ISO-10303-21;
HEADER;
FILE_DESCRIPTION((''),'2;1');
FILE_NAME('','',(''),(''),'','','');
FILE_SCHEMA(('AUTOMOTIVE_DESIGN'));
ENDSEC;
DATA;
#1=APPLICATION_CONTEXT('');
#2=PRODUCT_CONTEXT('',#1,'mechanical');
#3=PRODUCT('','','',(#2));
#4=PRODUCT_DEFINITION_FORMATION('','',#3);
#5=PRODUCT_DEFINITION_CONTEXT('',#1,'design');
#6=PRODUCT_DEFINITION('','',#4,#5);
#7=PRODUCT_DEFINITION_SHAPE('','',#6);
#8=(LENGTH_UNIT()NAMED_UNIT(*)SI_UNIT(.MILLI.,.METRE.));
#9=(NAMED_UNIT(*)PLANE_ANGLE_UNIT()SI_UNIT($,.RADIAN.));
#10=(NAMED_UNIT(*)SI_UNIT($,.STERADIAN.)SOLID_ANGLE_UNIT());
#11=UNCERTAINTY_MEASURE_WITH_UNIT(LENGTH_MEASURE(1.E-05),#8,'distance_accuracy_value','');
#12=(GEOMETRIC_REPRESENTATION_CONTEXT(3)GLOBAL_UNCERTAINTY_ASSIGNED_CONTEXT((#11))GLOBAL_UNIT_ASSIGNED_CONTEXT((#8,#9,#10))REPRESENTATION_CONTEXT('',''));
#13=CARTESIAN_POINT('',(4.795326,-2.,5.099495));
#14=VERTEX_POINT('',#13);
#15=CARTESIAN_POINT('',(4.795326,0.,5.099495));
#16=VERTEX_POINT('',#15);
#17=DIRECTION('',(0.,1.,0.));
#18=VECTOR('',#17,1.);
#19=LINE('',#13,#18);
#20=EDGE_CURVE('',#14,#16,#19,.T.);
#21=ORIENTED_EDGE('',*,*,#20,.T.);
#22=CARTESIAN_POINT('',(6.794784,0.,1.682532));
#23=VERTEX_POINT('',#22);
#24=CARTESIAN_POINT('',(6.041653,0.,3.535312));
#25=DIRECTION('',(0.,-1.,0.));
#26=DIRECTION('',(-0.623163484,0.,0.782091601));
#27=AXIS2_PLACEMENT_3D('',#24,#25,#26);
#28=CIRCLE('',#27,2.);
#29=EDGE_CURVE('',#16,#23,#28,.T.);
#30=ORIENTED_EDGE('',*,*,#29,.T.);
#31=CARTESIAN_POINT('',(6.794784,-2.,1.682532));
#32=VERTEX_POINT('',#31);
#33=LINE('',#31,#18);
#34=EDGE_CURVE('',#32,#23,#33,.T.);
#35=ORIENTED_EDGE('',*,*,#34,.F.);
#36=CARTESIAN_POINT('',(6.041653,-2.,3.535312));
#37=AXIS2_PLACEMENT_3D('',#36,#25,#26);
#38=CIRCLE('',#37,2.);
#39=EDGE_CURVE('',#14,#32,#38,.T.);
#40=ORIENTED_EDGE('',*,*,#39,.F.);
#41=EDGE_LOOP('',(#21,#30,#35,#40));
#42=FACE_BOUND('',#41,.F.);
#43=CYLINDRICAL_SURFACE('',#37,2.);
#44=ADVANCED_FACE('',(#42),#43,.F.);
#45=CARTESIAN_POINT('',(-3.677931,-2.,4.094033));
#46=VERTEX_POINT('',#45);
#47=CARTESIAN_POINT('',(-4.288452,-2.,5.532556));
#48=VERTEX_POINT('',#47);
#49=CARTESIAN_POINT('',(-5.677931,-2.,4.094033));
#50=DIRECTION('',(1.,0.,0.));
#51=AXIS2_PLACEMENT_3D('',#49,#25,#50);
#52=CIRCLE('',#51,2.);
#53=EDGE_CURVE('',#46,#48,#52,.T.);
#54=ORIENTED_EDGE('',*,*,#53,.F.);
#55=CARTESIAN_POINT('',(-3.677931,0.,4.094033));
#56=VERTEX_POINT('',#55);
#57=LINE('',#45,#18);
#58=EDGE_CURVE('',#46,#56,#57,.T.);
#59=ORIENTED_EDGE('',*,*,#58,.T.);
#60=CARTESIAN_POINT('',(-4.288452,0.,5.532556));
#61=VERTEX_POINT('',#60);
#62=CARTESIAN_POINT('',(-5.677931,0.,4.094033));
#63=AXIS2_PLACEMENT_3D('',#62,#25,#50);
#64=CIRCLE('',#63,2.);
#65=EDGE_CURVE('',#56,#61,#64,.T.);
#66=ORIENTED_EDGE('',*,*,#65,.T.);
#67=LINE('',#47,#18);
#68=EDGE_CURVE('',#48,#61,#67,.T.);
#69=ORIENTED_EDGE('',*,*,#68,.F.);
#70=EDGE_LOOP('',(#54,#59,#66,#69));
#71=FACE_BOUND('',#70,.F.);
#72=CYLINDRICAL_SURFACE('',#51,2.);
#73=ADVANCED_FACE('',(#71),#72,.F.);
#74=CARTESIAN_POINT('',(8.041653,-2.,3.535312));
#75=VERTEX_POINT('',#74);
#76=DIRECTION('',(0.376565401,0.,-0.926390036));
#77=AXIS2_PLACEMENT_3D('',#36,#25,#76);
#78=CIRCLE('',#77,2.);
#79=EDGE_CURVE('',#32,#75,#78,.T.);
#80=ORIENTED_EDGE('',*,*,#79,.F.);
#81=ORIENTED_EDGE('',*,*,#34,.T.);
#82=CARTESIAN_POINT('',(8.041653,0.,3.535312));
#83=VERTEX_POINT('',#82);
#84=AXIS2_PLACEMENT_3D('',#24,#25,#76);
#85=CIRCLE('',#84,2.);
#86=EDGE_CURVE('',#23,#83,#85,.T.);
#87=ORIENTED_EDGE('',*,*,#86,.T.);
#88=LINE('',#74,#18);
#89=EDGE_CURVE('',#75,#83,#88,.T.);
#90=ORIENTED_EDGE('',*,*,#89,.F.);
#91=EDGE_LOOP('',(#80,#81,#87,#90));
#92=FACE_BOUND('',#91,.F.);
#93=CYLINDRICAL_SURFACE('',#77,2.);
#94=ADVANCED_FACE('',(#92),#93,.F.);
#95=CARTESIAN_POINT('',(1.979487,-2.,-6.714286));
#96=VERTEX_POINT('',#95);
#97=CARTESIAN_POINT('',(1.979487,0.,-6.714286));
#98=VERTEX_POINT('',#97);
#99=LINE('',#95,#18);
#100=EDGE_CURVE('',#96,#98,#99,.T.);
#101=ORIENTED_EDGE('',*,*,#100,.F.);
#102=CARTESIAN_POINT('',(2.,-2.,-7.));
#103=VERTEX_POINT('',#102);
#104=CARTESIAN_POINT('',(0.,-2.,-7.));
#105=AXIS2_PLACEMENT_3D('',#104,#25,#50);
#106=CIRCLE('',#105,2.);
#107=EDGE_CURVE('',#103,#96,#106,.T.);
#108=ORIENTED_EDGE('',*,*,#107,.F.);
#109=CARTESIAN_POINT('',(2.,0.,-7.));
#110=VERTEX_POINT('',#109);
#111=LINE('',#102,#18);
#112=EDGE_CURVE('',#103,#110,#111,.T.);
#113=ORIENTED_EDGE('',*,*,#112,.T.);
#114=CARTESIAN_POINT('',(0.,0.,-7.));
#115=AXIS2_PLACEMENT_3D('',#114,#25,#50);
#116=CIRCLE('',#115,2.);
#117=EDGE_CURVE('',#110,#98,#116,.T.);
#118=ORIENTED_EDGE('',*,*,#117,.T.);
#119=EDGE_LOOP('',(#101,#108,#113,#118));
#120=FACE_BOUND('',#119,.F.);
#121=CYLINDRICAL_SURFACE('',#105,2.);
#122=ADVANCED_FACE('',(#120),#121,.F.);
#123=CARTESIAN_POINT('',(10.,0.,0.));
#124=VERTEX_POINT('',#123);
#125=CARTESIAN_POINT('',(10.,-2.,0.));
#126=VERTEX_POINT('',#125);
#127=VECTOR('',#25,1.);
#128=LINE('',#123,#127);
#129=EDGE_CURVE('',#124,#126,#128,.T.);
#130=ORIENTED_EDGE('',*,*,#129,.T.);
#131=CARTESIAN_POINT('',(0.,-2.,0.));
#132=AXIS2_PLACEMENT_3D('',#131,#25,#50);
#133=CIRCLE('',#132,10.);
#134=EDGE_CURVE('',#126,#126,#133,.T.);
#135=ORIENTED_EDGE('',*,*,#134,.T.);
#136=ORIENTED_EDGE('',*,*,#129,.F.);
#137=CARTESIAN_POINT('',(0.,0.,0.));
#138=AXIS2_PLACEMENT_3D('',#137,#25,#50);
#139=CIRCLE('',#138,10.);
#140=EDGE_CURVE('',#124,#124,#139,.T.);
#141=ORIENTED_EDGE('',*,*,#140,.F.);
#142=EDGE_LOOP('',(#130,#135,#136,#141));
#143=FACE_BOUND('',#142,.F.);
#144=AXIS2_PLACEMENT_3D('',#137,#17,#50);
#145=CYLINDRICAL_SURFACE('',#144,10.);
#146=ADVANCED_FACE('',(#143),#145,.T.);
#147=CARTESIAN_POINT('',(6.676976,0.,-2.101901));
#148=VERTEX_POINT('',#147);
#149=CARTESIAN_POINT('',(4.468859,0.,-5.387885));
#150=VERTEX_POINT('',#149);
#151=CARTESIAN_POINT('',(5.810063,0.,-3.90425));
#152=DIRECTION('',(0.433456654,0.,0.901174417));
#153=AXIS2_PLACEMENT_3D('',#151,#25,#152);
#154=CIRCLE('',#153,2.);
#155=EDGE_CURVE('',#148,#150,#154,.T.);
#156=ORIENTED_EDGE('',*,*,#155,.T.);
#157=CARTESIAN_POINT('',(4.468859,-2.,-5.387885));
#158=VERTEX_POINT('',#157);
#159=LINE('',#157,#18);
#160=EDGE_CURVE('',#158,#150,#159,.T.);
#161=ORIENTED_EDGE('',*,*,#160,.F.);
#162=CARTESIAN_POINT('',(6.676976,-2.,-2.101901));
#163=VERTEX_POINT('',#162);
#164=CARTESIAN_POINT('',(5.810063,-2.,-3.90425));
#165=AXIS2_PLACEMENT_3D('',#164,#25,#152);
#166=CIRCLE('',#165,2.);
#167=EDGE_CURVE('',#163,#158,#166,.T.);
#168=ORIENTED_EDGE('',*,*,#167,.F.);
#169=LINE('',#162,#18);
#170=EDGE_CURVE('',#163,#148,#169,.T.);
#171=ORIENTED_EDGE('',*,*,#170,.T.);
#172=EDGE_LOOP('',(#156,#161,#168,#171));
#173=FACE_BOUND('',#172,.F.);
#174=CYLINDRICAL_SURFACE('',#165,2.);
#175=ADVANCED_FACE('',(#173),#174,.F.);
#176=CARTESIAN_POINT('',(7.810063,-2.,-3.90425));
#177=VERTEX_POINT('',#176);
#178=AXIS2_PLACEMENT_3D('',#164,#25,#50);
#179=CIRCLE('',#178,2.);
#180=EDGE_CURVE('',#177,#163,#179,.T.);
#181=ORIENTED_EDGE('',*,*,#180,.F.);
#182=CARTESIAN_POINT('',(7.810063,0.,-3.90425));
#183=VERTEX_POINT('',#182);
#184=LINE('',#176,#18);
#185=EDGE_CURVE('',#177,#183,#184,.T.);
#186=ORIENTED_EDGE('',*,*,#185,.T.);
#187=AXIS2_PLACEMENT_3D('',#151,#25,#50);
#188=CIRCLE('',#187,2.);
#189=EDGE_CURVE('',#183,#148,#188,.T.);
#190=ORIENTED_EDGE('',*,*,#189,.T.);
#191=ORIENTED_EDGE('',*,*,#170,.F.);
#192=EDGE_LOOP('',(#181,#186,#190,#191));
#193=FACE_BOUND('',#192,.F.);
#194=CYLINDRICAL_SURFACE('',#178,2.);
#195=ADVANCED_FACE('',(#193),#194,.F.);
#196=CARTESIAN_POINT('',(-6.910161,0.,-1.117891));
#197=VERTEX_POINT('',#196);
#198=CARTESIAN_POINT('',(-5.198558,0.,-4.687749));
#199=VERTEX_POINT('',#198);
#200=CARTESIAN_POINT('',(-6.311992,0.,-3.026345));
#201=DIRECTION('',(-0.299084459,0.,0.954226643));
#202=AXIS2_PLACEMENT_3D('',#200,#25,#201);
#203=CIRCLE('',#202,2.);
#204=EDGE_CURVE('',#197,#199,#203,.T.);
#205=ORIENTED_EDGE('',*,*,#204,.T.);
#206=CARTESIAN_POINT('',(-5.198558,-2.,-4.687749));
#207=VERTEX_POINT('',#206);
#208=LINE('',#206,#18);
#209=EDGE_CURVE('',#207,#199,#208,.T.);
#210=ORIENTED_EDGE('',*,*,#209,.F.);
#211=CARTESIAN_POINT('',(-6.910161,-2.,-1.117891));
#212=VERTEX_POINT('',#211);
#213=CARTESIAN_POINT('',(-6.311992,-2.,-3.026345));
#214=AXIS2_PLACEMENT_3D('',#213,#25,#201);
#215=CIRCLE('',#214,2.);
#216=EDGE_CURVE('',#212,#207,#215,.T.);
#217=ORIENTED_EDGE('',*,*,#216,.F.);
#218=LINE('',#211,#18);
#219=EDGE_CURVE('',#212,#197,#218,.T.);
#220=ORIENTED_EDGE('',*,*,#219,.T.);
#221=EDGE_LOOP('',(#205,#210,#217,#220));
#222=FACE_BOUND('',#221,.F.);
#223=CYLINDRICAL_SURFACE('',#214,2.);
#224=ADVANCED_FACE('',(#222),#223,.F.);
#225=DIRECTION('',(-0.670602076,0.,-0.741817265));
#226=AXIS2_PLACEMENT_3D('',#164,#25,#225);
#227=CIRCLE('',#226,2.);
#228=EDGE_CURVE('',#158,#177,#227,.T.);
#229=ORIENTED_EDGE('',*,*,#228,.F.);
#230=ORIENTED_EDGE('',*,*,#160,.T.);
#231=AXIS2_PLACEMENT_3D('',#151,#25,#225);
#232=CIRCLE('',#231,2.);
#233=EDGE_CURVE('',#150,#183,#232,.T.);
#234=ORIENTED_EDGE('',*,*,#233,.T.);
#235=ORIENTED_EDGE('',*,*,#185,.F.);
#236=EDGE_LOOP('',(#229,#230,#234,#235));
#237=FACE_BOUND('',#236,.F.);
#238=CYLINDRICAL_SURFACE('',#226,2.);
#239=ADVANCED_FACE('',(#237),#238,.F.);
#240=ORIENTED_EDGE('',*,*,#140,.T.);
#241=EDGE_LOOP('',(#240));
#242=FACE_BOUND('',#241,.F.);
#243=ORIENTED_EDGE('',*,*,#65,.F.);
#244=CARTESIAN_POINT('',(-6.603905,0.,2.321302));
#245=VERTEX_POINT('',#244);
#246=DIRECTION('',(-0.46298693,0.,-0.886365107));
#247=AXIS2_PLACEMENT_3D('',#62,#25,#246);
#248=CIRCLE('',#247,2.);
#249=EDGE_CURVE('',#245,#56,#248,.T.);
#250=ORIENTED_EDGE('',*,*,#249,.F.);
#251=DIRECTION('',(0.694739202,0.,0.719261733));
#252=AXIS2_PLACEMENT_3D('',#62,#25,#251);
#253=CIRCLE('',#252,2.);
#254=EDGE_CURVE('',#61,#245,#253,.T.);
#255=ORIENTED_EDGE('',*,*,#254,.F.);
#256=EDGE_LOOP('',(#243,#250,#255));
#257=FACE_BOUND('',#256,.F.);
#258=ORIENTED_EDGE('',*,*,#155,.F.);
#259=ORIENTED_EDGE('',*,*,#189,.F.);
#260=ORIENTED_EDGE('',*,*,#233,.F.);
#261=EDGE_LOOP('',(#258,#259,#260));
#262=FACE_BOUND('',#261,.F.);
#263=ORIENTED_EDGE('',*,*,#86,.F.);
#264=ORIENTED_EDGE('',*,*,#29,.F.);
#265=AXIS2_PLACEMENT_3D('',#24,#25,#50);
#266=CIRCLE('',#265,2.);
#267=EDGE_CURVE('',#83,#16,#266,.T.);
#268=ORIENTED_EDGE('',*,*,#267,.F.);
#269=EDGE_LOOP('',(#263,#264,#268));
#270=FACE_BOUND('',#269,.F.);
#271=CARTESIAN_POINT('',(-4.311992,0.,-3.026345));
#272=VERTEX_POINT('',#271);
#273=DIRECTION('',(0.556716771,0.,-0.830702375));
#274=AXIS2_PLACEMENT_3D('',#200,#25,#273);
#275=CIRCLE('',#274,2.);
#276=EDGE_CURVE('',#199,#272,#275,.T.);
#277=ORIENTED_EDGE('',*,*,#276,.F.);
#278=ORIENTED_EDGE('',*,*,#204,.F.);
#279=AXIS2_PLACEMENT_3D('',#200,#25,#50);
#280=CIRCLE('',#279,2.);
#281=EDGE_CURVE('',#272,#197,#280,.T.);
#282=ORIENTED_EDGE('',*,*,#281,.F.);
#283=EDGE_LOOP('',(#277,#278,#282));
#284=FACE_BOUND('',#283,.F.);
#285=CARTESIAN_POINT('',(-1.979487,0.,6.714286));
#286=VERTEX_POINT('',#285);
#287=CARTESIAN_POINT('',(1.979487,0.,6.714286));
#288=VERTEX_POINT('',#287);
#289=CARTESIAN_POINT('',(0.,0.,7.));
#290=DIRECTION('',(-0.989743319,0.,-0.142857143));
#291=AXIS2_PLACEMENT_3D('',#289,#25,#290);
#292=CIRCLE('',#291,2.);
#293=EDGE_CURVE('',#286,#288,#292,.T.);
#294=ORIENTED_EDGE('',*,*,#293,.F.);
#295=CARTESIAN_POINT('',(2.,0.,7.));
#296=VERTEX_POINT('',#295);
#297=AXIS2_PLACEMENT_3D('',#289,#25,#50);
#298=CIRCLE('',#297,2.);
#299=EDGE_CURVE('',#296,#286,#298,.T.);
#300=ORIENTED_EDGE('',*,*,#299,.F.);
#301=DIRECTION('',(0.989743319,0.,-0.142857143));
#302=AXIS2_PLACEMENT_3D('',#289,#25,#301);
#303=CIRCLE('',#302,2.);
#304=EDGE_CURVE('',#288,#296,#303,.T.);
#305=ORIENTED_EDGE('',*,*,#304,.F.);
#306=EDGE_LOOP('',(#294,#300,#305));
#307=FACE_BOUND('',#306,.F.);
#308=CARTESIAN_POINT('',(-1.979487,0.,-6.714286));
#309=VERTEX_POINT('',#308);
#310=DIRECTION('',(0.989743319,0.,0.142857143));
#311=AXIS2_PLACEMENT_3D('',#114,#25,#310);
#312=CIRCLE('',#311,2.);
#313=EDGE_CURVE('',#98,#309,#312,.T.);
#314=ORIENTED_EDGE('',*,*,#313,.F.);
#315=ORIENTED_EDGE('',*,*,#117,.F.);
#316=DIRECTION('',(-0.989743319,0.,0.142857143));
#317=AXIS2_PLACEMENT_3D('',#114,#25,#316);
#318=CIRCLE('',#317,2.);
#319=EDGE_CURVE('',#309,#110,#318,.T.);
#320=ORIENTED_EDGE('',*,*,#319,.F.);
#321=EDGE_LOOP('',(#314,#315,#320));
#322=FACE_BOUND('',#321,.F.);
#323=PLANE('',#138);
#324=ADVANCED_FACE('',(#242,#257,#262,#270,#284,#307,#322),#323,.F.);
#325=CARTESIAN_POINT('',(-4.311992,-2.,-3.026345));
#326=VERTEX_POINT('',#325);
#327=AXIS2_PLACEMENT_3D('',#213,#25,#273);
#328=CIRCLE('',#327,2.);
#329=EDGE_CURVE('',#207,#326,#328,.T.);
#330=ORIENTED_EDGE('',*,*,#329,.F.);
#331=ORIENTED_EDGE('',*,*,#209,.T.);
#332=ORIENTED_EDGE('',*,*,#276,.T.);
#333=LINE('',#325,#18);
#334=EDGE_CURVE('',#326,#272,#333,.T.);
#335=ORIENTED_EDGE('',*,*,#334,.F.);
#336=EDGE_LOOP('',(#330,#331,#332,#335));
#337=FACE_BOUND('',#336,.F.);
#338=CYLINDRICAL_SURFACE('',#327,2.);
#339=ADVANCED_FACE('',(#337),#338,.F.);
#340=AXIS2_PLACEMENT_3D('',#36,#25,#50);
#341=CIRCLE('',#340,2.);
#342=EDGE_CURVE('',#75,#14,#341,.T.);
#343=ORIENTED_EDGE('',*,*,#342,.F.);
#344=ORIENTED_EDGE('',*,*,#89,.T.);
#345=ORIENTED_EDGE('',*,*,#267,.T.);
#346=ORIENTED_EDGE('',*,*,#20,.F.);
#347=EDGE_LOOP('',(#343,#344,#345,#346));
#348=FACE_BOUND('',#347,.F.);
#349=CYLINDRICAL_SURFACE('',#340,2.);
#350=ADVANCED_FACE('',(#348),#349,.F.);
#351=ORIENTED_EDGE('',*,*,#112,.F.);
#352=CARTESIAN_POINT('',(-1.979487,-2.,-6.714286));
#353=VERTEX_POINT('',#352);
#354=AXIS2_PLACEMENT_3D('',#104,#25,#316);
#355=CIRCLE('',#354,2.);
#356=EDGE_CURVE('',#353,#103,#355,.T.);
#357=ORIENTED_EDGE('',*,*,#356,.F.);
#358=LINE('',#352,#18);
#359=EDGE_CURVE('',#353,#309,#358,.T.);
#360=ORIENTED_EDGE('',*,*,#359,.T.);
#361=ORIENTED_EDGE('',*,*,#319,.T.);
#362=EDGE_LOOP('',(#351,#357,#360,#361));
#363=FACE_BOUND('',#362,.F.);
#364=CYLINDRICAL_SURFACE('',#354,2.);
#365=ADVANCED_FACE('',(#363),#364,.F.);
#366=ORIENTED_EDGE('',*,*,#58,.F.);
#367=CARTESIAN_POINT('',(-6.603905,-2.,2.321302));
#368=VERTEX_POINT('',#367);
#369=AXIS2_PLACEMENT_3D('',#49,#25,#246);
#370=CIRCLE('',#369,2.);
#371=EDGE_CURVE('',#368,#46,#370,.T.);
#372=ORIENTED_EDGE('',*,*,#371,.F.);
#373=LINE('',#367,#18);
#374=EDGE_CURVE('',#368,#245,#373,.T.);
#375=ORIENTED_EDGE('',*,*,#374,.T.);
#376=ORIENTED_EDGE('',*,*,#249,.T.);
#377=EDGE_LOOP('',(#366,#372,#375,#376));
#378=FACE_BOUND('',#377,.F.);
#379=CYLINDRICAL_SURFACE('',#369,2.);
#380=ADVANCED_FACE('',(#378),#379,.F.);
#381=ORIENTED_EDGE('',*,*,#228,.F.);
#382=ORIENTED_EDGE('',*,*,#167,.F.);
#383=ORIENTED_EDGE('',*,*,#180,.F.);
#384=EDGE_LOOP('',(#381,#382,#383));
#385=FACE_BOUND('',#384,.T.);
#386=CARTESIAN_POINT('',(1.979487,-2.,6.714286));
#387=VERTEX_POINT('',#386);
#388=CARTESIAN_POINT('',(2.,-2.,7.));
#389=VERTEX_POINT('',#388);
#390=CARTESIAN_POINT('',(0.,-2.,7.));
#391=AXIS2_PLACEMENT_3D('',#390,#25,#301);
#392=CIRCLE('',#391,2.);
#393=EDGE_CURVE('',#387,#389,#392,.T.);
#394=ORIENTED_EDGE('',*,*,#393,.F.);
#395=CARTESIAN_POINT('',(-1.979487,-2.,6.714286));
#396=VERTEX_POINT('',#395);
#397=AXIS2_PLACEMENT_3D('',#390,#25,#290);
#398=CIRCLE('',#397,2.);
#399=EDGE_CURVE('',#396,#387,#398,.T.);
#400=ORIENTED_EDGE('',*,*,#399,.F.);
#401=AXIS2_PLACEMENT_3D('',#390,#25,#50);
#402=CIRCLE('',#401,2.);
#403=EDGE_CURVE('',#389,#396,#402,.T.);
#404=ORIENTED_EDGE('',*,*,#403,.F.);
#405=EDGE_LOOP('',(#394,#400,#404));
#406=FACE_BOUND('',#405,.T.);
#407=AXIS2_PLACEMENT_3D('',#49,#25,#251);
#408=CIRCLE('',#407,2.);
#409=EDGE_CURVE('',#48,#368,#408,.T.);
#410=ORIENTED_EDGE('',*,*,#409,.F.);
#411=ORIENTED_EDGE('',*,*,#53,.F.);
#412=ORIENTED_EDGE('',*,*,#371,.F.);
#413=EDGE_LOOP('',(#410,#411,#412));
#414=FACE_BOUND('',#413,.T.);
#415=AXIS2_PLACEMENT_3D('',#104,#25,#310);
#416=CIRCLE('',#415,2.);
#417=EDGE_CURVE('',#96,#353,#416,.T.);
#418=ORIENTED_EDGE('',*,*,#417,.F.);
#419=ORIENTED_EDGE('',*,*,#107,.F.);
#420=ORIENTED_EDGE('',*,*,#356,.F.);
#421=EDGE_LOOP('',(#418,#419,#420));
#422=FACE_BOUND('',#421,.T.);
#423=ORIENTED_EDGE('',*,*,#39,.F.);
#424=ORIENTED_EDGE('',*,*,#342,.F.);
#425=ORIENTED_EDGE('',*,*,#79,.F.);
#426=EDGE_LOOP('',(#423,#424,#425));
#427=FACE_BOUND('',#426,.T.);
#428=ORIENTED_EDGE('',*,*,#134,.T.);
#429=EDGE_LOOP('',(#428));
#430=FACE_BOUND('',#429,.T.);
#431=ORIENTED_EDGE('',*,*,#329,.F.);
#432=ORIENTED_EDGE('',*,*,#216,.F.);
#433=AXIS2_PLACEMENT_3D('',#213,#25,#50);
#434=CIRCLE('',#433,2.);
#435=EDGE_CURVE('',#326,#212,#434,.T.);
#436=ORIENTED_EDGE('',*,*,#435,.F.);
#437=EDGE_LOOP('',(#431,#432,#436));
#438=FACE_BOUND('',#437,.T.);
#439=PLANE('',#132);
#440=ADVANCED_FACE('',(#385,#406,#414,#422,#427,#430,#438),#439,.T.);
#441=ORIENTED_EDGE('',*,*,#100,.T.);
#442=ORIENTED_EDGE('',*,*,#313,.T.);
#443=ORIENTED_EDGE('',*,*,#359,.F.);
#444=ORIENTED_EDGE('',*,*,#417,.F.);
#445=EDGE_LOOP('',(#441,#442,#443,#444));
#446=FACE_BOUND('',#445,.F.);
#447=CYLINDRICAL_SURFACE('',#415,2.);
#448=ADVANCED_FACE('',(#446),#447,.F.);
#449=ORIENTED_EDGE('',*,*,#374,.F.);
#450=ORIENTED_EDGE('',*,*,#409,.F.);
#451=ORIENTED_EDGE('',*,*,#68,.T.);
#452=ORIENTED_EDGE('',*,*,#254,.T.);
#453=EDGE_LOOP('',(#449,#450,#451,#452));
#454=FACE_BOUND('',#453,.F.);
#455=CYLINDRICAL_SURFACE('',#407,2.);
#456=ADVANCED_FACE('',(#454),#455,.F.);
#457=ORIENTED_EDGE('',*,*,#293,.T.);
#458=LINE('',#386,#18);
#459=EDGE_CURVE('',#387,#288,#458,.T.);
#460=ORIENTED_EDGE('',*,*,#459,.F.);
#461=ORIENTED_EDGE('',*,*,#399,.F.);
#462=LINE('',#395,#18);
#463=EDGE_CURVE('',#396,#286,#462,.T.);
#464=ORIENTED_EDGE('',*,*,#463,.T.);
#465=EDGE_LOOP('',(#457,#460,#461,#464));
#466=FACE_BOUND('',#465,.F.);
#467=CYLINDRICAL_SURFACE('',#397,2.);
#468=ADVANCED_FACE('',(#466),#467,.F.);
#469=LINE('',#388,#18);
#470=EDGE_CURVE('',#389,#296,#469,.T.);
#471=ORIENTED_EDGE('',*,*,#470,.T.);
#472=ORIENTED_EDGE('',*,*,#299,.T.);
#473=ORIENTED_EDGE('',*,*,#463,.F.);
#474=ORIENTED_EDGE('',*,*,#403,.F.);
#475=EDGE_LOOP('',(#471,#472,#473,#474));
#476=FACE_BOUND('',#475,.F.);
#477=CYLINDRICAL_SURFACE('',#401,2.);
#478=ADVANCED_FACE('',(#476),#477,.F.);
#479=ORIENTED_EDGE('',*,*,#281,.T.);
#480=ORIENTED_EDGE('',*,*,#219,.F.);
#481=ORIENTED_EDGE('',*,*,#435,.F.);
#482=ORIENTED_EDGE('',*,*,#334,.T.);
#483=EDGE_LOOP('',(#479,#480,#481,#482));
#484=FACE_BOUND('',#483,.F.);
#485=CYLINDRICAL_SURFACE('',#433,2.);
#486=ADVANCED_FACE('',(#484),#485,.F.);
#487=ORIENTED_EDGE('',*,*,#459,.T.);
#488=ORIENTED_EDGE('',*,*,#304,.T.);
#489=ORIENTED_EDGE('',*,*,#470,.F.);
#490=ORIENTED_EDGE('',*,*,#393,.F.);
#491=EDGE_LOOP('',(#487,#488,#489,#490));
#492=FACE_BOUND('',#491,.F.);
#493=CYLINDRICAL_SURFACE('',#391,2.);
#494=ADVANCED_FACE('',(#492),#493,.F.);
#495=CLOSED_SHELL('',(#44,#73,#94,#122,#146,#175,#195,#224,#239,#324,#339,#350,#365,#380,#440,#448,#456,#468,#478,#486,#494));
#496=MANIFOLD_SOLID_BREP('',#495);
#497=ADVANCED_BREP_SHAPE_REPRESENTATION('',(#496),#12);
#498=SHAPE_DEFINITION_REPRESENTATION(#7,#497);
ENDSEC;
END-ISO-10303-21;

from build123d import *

# Parameters (mm, degrees)
F0_R     = 10
F1_DEPTH = 2
F3_DEPTH = 2.001


with BuildPart() as f1:
    # F0 (on Front) → F1 (new body)
    with BuildSketch(Plane.XZ):
        Circle(F0_R)
    extrude(amount=F1_DEPTH)

    # F2 (on face) → F3 (cut, through all)
    with BuildSketch(Plane.XZ.offset(2)):
        with BuildLine():
            ThreePointArc((4.795326069, 5.0994948663), (4.3154664556, 2.525222618), (6.7947838404, 1.6825315934))
            ThreePointArc((6.7947838404, 1.6825315934), (6.0416530379, 3.5353116652), (4.795326069, 5.0994948663))
        make_face()
        with BuildLine():
            ThreePointArc((4.795326069, 5.0994948663), (6.0416530379, 3.5353116652), (6.7947838404, 1.6825315934))
            ThreePointArc((6.7947838404, 1.6825315934), (7.700909137, 2.4186786917), (8.0416530379, 3.5353116652))
            ThreePointArc((8.0416530379, 3.5353116652), (6.9097964771, 5.3370682994), (4.795326069, 5.0994948663))
        make_face()
        with BuildLine():
            ThreePointArc((7.8100628501, -3.9042502068), (7.5032590313, -2.8397847578), (6.6769761581, -2.1019013736))
            ThreePointArc((6.6769761581, -2.1019013736), (5.8100628501, -3.9042502068), (4.4688586973, -5.3878847374))
            ThreePointArc((4.4688586973, -5.3878847374), (6.6217252474, -5.7321463069), (7.8100628501, -3.9042502068))
        make_face()
        with BuildLine():
            ThreePointArc((4.4688586973, -5.3878847374), (5.8100628501, -3.9042502068), (6.6769761581, -2.1019013736))
            ThreePointArc((6.6769761581, -2.1019013736), (4.150044893, -2.7887501477), (4.4688586973, -5.3878847374))
        make_face()
        with BuildLine():
            ThreePointArc((-1.9794866372, 6.7142857143), (0, 5), (1.9794866372, 6.7142857143))
            ThreePointArc((1.9794866372, 6.7142857143), (0, 7), (-1.9794866372, 6.7142857143))
        make_face()
        with BuildLine():
            ThreePointArc((-1.9794866372, 6.7142857143), (0, 7), (1.9794866372, 6.7142857143))
            ThreePointArc((1.9794866372, 6.7142857143), (1.9948650674, 6.8567751321), (2, 7))
            ThreePointArc((2, 7), (-0.1432248679, 8.9948650674), (-1.9794866372, 6.7142857143))
        make_face()
        with BuildLine():
            ThreePointArc((2, -7), (1.9948650674, -6.8567751321), (1.9794866372, -6.7142857143))
            ThreePointArc((1.9794866372, -6.7142857143), (0, -7), (-1.9794866372, -6.7142857143))
            ThreePointArc((-1.9794866372, -6.7142857143), (-0.1432248679, -8.9948650674), (2, -7))
        make_face()
        with BuildLine():
            ThreePointArc((-1.9794866372, -6.7142857143), (0, -7), (1.9794866372, -6.7142857143))
            ThreePointArc((1.9794866372, -6.7142857143), (0, -5), (-1.9794866372, -6.7142857143))
        make_face()
        with BuildLine():
            ThreePointArc((-3.6779306672, 4.0940326499), (-3.8368770547, 4.8753914638), (-4.2884522632, 5.5325561168))
            ThreePointArc((-4.2884522632, 5.5325561168), (-5.6779306672, 4.0940326499), (-6.6039045269, 2.321302436))
            ThreePointArc((-6.6039045269, 2.321302436), (-4.6415783428, 2.3834848255), (-3.6779306672, 4.0940326499))
        make_face()
        with BuildLine():
            ThreePointArc((-6.6039045269, 2.321302436), (-5.6779306672, 4.0940326499), (-4.2884522632, 5.5325561168))
            ThreePointArc((-4.2884522632, 5.5325561168), (-7.3001965721, 5.2637562642), (-6.6039045269, 2.321302436))
        make_face()
        with BuildLine():
            ThreePointArc((-6.9101605699, -1.1178912729), (-8.1154178378, -3.891014433), (-5.1985581087, -4.6877493096))
            ThreePointArc((-5.1985581087, -4.6877493096), (-6.3119916516, -3.026344559), (-6.9101605699, -1.1178912729))
        make_face()
        with BuildLine():
            ThreePointArc((-6.9101605699, -1.1178912729), (-6.3119916516, -3.026344559), (-5.1985581087, -4.6877493096))
            ThreePointArc((-5.1985581087, -4.6877493096), (-4.5474992195, -3.9679211396), (-4.3119916516, -3.026344559))
            ThreePointArc((-4.3119916516, -3.026344559), (-5.1280021746, -1.4144609037), (-6.9101605699, -1.1178912729))
        make_face()
    extrude(amount=-F3_DEPTH, mode=Mode.SUBTRACT)


solid = f1.part
